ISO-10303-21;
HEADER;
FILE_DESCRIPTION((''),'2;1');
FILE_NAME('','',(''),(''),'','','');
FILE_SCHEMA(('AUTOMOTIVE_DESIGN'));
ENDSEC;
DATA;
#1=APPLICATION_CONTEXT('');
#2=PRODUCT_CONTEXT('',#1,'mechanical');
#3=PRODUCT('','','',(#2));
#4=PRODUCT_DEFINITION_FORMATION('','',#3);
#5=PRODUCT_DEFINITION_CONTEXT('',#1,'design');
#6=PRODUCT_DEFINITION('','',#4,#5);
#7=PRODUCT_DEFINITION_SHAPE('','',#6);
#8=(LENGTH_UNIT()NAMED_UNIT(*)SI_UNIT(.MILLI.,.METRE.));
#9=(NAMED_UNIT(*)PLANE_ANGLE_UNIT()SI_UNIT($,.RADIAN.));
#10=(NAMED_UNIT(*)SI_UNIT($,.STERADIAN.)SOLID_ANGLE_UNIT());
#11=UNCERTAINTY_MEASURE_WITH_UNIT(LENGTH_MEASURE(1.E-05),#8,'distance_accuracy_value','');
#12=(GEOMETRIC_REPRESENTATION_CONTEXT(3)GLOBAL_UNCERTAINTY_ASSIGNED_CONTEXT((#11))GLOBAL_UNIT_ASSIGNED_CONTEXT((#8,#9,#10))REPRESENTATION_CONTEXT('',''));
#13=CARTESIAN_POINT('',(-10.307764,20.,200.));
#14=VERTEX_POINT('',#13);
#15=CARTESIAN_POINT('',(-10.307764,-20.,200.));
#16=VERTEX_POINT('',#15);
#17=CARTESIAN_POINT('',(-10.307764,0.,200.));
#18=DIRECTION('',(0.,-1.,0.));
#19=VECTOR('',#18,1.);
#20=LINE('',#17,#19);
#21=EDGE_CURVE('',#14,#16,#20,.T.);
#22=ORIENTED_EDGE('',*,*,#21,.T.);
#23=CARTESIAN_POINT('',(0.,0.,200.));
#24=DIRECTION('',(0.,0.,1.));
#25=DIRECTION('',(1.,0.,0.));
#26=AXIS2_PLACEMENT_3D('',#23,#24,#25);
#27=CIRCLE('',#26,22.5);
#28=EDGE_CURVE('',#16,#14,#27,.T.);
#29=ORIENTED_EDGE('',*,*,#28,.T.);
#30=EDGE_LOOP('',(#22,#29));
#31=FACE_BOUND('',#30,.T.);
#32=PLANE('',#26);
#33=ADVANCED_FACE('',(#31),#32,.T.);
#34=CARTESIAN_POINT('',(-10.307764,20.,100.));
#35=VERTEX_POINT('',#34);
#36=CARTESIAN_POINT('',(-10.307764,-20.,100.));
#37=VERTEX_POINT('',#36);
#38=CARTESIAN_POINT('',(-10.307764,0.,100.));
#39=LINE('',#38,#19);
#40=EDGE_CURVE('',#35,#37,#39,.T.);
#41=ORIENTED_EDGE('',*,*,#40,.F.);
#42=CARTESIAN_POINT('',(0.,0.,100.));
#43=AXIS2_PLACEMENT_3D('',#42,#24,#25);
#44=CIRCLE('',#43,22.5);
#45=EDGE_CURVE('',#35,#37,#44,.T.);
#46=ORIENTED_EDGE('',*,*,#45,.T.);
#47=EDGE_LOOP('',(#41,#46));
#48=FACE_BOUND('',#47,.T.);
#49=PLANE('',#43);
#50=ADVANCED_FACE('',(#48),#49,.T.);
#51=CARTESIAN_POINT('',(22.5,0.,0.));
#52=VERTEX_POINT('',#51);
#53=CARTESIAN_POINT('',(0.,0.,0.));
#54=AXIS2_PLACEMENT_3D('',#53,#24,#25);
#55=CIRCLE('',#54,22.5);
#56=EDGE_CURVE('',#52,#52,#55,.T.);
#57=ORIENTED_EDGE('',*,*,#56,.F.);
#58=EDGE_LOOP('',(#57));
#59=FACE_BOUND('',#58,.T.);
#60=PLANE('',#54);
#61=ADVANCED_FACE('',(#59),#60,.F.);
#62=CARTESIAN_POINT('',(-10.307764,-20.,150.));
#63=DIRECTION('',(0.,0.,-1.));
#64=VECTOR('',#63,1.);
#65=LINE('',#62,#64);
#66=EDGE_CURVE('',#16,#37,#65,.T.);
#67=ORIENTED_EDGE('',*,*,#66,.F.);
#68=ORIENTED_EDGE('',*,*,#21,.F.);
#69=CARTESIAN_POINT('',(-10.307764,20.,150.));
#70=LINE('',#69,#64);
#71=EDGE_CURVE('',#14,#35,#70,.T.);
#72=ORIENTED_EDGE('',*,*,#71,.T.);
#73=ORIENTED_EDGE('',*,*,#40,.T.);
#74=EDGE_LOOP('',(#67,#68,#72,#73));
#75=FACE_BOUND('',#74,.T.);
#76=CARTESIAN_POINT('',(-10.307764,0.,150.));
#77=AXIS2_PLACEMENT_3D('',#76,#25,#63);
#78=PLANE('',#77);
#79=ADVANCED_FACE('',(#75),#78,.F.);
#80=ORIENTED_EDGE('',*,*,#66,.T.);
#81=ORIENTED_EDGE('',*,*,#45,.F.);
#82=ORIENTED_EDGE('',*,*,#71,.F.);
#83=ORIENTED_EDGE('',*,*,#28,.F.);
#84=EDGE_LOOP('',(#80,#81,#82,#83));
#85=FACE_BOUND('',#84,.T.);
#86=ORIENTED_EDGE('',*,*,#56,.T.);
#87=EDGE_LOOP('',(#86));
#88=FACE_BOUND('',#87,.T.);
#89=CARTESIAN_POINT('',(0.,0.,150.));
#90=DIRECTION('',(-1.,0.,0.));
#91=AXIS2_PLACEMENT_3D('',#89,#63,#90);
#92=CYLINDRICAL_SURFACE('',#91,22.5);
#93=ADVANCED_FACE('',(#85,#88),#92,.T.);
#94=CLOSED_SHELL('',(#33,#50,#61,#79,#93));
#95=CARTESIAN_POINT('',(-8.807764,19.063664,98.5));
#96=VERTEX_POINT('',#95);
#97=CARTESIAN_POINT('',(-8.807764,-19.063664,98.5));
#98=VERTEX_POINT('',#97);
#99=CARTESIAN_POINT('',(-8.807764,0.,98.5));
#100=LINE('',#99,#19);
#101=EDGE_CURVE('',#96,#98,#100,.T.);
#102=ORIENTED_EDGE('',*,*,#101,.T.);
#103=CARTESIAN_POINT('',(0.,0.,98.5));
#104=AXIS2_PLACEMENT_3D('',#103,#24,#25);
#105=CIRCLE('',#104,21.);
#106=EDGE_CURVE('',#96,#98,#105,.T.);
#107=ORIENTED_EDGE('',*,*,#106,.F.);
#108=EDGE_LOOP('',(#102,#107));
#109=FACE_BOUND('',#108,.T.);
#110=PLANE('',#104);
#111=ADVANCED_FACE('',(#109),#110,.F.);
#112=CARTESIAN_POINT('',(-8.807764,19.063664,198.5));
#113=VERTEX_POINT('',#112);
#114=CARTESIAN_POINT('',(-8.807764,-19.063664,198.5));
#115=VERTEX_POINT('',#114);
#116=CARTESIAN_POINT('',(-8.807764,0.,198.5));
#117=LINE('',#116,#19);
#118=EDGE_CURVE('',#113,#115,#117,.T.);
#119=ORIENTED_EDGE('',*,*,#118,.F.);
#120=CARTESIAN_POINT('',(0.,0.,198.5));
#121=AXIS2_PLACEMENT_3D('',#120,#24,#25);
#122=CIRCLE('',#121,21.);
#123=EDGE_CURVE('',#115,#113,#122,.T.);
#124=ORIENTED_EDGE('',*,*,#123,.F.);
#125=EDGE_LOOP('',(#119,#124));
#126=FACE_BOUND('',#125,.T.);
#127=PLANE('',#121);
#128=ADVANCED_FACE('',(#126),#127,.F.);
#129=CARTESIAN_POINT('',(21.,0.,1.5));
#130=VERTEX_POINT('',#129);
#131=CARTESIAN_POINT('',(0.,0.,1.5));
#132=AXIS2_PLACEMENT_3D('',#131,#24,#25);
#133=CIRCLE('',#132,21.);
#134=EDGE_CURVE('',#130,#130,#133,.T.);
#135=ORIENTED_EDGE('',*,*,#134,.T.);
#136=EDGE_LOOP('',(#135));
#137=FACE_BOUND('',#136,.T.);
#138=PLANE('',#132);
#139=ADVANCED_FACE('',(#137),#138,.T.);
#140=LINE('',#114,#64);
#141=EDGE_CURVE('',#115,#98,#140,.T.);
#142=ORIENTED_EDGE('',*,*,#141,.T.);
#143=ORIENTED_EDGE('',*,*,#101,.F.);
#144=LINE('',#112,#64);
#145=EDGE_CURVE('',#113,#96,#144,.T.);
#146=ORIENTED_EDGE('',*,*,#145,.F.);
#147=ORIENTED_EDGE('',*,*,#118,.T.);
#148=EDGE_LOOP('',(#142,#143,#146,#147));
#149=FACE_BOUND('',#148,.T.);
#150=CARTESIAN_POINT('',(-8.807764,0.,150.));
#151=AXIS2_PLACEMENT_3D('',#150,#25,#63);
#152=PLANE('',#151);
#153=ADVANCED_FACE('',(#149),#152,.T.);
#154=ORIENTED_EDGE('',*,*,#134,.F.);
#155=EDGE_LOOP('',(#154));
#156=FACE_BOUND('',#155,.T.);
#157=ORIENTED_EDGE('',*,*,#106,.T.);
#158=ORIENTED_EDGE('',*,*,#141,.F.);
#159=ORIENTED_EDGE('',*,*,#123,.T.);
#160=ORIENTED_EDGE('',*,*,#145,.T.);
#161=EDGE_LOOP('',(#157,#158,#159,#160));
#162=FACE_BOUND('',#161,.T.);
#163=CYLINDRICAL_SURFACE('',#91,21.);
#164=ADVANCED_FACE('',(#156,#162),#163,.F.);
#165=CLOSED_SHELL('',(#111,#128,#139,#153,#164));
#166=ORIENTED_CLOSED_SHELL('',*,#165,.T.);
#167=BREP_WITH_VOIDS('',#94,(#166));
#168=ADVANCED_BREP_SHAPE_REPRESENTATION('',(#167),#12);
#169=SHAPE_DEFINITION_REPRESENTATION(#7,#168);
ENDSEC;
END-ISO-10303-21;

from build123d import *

# Parameters (mm, degrees)
EXTRUDE_4_DEPTH = 150
SKETCH_1_5_R    = 22.5
EXTRUDE_5_DEPTH = 100
EXTRUDE_6_DEPTH = 50
SHELL_START     = 1.5
SHELL_3_DEPTH   = 197
SHELL_3_2_DEPTH = 97


# Read off the part's stored shape, not the designer's step: 抽壳3
with BuildPart() as part:
    # 草图1 → 凸台-拉伸4 (new body)
    with BuildSketch(Plane.XY):
        with BuildLine():
            ThreePointArc((22.5, 0), (11.711646096, 19.211646096), (-10.307764064, 20))
            Line((-10.307764064, 20), (-10.307764064, -20))
            ThreePointArc((-10.307764064, -20), (11.711646096, -19.211646096), (22.5, 0))
        make_face()
    extrude(amount=EXTRUDE_4_DEPTH)

    # 草图1<5> → 凸台-拉伸5 (add)
    with BuildSketch(Plane.XY):
        with Locations(Location((0, 0, 0), (0, 0, 117.266044451))):
            Circle(SKETCH_1_5_R)
    extrude(amount=EXTRUDE_5_DEPTH)

    # 草图4 → 凸台-拉伸6 (add)
    with BuildSketch(Plane.XY.offset(150)):
        with BuildLine():
            ThreePointArc((-10.307764064, -20), (22.5, 0), (-10.307764064, 20))
            Line((-10.307764064, 20), (-10.307764064, -20))
        make_face()
    extrude(amount=EXTRUDE_6_DEPTH)

    # 抽壳3 outline → 抽壳3 (cut)
    with BuildSketch(Plane.XY.offset(SHELL_START)):
        with BuildLine():
            Line((-8.807764064, 19.063664186), (-8.807764064, -19.063664186))
            ThreePointArc((-8.807764064, -19.063664186), (21, 0), (-8.807764064, 19.063664186))
        make_face()
    extrude(amount=SHELL_3_DEPTH, mode=Mode.SUBTRACT)

    # Shell 3 2 outline → Shell 3 2 (cut)
    with BuildSketch(Plane.XY.offset(SHELL_START)):
        with BuildLine():
            ThreePointArc((-8.807764064, 19.063664186), (-21, 0), (-8.807764064, -19.063664186))
            Line((-8.807764064, -19.063664186), (-8.807764064, 19.063664186))
        make_face()
    extrude(amount=SHELL_3_2_DEPTH, mode=Mode.SUBTRACT)


solid = part.part
